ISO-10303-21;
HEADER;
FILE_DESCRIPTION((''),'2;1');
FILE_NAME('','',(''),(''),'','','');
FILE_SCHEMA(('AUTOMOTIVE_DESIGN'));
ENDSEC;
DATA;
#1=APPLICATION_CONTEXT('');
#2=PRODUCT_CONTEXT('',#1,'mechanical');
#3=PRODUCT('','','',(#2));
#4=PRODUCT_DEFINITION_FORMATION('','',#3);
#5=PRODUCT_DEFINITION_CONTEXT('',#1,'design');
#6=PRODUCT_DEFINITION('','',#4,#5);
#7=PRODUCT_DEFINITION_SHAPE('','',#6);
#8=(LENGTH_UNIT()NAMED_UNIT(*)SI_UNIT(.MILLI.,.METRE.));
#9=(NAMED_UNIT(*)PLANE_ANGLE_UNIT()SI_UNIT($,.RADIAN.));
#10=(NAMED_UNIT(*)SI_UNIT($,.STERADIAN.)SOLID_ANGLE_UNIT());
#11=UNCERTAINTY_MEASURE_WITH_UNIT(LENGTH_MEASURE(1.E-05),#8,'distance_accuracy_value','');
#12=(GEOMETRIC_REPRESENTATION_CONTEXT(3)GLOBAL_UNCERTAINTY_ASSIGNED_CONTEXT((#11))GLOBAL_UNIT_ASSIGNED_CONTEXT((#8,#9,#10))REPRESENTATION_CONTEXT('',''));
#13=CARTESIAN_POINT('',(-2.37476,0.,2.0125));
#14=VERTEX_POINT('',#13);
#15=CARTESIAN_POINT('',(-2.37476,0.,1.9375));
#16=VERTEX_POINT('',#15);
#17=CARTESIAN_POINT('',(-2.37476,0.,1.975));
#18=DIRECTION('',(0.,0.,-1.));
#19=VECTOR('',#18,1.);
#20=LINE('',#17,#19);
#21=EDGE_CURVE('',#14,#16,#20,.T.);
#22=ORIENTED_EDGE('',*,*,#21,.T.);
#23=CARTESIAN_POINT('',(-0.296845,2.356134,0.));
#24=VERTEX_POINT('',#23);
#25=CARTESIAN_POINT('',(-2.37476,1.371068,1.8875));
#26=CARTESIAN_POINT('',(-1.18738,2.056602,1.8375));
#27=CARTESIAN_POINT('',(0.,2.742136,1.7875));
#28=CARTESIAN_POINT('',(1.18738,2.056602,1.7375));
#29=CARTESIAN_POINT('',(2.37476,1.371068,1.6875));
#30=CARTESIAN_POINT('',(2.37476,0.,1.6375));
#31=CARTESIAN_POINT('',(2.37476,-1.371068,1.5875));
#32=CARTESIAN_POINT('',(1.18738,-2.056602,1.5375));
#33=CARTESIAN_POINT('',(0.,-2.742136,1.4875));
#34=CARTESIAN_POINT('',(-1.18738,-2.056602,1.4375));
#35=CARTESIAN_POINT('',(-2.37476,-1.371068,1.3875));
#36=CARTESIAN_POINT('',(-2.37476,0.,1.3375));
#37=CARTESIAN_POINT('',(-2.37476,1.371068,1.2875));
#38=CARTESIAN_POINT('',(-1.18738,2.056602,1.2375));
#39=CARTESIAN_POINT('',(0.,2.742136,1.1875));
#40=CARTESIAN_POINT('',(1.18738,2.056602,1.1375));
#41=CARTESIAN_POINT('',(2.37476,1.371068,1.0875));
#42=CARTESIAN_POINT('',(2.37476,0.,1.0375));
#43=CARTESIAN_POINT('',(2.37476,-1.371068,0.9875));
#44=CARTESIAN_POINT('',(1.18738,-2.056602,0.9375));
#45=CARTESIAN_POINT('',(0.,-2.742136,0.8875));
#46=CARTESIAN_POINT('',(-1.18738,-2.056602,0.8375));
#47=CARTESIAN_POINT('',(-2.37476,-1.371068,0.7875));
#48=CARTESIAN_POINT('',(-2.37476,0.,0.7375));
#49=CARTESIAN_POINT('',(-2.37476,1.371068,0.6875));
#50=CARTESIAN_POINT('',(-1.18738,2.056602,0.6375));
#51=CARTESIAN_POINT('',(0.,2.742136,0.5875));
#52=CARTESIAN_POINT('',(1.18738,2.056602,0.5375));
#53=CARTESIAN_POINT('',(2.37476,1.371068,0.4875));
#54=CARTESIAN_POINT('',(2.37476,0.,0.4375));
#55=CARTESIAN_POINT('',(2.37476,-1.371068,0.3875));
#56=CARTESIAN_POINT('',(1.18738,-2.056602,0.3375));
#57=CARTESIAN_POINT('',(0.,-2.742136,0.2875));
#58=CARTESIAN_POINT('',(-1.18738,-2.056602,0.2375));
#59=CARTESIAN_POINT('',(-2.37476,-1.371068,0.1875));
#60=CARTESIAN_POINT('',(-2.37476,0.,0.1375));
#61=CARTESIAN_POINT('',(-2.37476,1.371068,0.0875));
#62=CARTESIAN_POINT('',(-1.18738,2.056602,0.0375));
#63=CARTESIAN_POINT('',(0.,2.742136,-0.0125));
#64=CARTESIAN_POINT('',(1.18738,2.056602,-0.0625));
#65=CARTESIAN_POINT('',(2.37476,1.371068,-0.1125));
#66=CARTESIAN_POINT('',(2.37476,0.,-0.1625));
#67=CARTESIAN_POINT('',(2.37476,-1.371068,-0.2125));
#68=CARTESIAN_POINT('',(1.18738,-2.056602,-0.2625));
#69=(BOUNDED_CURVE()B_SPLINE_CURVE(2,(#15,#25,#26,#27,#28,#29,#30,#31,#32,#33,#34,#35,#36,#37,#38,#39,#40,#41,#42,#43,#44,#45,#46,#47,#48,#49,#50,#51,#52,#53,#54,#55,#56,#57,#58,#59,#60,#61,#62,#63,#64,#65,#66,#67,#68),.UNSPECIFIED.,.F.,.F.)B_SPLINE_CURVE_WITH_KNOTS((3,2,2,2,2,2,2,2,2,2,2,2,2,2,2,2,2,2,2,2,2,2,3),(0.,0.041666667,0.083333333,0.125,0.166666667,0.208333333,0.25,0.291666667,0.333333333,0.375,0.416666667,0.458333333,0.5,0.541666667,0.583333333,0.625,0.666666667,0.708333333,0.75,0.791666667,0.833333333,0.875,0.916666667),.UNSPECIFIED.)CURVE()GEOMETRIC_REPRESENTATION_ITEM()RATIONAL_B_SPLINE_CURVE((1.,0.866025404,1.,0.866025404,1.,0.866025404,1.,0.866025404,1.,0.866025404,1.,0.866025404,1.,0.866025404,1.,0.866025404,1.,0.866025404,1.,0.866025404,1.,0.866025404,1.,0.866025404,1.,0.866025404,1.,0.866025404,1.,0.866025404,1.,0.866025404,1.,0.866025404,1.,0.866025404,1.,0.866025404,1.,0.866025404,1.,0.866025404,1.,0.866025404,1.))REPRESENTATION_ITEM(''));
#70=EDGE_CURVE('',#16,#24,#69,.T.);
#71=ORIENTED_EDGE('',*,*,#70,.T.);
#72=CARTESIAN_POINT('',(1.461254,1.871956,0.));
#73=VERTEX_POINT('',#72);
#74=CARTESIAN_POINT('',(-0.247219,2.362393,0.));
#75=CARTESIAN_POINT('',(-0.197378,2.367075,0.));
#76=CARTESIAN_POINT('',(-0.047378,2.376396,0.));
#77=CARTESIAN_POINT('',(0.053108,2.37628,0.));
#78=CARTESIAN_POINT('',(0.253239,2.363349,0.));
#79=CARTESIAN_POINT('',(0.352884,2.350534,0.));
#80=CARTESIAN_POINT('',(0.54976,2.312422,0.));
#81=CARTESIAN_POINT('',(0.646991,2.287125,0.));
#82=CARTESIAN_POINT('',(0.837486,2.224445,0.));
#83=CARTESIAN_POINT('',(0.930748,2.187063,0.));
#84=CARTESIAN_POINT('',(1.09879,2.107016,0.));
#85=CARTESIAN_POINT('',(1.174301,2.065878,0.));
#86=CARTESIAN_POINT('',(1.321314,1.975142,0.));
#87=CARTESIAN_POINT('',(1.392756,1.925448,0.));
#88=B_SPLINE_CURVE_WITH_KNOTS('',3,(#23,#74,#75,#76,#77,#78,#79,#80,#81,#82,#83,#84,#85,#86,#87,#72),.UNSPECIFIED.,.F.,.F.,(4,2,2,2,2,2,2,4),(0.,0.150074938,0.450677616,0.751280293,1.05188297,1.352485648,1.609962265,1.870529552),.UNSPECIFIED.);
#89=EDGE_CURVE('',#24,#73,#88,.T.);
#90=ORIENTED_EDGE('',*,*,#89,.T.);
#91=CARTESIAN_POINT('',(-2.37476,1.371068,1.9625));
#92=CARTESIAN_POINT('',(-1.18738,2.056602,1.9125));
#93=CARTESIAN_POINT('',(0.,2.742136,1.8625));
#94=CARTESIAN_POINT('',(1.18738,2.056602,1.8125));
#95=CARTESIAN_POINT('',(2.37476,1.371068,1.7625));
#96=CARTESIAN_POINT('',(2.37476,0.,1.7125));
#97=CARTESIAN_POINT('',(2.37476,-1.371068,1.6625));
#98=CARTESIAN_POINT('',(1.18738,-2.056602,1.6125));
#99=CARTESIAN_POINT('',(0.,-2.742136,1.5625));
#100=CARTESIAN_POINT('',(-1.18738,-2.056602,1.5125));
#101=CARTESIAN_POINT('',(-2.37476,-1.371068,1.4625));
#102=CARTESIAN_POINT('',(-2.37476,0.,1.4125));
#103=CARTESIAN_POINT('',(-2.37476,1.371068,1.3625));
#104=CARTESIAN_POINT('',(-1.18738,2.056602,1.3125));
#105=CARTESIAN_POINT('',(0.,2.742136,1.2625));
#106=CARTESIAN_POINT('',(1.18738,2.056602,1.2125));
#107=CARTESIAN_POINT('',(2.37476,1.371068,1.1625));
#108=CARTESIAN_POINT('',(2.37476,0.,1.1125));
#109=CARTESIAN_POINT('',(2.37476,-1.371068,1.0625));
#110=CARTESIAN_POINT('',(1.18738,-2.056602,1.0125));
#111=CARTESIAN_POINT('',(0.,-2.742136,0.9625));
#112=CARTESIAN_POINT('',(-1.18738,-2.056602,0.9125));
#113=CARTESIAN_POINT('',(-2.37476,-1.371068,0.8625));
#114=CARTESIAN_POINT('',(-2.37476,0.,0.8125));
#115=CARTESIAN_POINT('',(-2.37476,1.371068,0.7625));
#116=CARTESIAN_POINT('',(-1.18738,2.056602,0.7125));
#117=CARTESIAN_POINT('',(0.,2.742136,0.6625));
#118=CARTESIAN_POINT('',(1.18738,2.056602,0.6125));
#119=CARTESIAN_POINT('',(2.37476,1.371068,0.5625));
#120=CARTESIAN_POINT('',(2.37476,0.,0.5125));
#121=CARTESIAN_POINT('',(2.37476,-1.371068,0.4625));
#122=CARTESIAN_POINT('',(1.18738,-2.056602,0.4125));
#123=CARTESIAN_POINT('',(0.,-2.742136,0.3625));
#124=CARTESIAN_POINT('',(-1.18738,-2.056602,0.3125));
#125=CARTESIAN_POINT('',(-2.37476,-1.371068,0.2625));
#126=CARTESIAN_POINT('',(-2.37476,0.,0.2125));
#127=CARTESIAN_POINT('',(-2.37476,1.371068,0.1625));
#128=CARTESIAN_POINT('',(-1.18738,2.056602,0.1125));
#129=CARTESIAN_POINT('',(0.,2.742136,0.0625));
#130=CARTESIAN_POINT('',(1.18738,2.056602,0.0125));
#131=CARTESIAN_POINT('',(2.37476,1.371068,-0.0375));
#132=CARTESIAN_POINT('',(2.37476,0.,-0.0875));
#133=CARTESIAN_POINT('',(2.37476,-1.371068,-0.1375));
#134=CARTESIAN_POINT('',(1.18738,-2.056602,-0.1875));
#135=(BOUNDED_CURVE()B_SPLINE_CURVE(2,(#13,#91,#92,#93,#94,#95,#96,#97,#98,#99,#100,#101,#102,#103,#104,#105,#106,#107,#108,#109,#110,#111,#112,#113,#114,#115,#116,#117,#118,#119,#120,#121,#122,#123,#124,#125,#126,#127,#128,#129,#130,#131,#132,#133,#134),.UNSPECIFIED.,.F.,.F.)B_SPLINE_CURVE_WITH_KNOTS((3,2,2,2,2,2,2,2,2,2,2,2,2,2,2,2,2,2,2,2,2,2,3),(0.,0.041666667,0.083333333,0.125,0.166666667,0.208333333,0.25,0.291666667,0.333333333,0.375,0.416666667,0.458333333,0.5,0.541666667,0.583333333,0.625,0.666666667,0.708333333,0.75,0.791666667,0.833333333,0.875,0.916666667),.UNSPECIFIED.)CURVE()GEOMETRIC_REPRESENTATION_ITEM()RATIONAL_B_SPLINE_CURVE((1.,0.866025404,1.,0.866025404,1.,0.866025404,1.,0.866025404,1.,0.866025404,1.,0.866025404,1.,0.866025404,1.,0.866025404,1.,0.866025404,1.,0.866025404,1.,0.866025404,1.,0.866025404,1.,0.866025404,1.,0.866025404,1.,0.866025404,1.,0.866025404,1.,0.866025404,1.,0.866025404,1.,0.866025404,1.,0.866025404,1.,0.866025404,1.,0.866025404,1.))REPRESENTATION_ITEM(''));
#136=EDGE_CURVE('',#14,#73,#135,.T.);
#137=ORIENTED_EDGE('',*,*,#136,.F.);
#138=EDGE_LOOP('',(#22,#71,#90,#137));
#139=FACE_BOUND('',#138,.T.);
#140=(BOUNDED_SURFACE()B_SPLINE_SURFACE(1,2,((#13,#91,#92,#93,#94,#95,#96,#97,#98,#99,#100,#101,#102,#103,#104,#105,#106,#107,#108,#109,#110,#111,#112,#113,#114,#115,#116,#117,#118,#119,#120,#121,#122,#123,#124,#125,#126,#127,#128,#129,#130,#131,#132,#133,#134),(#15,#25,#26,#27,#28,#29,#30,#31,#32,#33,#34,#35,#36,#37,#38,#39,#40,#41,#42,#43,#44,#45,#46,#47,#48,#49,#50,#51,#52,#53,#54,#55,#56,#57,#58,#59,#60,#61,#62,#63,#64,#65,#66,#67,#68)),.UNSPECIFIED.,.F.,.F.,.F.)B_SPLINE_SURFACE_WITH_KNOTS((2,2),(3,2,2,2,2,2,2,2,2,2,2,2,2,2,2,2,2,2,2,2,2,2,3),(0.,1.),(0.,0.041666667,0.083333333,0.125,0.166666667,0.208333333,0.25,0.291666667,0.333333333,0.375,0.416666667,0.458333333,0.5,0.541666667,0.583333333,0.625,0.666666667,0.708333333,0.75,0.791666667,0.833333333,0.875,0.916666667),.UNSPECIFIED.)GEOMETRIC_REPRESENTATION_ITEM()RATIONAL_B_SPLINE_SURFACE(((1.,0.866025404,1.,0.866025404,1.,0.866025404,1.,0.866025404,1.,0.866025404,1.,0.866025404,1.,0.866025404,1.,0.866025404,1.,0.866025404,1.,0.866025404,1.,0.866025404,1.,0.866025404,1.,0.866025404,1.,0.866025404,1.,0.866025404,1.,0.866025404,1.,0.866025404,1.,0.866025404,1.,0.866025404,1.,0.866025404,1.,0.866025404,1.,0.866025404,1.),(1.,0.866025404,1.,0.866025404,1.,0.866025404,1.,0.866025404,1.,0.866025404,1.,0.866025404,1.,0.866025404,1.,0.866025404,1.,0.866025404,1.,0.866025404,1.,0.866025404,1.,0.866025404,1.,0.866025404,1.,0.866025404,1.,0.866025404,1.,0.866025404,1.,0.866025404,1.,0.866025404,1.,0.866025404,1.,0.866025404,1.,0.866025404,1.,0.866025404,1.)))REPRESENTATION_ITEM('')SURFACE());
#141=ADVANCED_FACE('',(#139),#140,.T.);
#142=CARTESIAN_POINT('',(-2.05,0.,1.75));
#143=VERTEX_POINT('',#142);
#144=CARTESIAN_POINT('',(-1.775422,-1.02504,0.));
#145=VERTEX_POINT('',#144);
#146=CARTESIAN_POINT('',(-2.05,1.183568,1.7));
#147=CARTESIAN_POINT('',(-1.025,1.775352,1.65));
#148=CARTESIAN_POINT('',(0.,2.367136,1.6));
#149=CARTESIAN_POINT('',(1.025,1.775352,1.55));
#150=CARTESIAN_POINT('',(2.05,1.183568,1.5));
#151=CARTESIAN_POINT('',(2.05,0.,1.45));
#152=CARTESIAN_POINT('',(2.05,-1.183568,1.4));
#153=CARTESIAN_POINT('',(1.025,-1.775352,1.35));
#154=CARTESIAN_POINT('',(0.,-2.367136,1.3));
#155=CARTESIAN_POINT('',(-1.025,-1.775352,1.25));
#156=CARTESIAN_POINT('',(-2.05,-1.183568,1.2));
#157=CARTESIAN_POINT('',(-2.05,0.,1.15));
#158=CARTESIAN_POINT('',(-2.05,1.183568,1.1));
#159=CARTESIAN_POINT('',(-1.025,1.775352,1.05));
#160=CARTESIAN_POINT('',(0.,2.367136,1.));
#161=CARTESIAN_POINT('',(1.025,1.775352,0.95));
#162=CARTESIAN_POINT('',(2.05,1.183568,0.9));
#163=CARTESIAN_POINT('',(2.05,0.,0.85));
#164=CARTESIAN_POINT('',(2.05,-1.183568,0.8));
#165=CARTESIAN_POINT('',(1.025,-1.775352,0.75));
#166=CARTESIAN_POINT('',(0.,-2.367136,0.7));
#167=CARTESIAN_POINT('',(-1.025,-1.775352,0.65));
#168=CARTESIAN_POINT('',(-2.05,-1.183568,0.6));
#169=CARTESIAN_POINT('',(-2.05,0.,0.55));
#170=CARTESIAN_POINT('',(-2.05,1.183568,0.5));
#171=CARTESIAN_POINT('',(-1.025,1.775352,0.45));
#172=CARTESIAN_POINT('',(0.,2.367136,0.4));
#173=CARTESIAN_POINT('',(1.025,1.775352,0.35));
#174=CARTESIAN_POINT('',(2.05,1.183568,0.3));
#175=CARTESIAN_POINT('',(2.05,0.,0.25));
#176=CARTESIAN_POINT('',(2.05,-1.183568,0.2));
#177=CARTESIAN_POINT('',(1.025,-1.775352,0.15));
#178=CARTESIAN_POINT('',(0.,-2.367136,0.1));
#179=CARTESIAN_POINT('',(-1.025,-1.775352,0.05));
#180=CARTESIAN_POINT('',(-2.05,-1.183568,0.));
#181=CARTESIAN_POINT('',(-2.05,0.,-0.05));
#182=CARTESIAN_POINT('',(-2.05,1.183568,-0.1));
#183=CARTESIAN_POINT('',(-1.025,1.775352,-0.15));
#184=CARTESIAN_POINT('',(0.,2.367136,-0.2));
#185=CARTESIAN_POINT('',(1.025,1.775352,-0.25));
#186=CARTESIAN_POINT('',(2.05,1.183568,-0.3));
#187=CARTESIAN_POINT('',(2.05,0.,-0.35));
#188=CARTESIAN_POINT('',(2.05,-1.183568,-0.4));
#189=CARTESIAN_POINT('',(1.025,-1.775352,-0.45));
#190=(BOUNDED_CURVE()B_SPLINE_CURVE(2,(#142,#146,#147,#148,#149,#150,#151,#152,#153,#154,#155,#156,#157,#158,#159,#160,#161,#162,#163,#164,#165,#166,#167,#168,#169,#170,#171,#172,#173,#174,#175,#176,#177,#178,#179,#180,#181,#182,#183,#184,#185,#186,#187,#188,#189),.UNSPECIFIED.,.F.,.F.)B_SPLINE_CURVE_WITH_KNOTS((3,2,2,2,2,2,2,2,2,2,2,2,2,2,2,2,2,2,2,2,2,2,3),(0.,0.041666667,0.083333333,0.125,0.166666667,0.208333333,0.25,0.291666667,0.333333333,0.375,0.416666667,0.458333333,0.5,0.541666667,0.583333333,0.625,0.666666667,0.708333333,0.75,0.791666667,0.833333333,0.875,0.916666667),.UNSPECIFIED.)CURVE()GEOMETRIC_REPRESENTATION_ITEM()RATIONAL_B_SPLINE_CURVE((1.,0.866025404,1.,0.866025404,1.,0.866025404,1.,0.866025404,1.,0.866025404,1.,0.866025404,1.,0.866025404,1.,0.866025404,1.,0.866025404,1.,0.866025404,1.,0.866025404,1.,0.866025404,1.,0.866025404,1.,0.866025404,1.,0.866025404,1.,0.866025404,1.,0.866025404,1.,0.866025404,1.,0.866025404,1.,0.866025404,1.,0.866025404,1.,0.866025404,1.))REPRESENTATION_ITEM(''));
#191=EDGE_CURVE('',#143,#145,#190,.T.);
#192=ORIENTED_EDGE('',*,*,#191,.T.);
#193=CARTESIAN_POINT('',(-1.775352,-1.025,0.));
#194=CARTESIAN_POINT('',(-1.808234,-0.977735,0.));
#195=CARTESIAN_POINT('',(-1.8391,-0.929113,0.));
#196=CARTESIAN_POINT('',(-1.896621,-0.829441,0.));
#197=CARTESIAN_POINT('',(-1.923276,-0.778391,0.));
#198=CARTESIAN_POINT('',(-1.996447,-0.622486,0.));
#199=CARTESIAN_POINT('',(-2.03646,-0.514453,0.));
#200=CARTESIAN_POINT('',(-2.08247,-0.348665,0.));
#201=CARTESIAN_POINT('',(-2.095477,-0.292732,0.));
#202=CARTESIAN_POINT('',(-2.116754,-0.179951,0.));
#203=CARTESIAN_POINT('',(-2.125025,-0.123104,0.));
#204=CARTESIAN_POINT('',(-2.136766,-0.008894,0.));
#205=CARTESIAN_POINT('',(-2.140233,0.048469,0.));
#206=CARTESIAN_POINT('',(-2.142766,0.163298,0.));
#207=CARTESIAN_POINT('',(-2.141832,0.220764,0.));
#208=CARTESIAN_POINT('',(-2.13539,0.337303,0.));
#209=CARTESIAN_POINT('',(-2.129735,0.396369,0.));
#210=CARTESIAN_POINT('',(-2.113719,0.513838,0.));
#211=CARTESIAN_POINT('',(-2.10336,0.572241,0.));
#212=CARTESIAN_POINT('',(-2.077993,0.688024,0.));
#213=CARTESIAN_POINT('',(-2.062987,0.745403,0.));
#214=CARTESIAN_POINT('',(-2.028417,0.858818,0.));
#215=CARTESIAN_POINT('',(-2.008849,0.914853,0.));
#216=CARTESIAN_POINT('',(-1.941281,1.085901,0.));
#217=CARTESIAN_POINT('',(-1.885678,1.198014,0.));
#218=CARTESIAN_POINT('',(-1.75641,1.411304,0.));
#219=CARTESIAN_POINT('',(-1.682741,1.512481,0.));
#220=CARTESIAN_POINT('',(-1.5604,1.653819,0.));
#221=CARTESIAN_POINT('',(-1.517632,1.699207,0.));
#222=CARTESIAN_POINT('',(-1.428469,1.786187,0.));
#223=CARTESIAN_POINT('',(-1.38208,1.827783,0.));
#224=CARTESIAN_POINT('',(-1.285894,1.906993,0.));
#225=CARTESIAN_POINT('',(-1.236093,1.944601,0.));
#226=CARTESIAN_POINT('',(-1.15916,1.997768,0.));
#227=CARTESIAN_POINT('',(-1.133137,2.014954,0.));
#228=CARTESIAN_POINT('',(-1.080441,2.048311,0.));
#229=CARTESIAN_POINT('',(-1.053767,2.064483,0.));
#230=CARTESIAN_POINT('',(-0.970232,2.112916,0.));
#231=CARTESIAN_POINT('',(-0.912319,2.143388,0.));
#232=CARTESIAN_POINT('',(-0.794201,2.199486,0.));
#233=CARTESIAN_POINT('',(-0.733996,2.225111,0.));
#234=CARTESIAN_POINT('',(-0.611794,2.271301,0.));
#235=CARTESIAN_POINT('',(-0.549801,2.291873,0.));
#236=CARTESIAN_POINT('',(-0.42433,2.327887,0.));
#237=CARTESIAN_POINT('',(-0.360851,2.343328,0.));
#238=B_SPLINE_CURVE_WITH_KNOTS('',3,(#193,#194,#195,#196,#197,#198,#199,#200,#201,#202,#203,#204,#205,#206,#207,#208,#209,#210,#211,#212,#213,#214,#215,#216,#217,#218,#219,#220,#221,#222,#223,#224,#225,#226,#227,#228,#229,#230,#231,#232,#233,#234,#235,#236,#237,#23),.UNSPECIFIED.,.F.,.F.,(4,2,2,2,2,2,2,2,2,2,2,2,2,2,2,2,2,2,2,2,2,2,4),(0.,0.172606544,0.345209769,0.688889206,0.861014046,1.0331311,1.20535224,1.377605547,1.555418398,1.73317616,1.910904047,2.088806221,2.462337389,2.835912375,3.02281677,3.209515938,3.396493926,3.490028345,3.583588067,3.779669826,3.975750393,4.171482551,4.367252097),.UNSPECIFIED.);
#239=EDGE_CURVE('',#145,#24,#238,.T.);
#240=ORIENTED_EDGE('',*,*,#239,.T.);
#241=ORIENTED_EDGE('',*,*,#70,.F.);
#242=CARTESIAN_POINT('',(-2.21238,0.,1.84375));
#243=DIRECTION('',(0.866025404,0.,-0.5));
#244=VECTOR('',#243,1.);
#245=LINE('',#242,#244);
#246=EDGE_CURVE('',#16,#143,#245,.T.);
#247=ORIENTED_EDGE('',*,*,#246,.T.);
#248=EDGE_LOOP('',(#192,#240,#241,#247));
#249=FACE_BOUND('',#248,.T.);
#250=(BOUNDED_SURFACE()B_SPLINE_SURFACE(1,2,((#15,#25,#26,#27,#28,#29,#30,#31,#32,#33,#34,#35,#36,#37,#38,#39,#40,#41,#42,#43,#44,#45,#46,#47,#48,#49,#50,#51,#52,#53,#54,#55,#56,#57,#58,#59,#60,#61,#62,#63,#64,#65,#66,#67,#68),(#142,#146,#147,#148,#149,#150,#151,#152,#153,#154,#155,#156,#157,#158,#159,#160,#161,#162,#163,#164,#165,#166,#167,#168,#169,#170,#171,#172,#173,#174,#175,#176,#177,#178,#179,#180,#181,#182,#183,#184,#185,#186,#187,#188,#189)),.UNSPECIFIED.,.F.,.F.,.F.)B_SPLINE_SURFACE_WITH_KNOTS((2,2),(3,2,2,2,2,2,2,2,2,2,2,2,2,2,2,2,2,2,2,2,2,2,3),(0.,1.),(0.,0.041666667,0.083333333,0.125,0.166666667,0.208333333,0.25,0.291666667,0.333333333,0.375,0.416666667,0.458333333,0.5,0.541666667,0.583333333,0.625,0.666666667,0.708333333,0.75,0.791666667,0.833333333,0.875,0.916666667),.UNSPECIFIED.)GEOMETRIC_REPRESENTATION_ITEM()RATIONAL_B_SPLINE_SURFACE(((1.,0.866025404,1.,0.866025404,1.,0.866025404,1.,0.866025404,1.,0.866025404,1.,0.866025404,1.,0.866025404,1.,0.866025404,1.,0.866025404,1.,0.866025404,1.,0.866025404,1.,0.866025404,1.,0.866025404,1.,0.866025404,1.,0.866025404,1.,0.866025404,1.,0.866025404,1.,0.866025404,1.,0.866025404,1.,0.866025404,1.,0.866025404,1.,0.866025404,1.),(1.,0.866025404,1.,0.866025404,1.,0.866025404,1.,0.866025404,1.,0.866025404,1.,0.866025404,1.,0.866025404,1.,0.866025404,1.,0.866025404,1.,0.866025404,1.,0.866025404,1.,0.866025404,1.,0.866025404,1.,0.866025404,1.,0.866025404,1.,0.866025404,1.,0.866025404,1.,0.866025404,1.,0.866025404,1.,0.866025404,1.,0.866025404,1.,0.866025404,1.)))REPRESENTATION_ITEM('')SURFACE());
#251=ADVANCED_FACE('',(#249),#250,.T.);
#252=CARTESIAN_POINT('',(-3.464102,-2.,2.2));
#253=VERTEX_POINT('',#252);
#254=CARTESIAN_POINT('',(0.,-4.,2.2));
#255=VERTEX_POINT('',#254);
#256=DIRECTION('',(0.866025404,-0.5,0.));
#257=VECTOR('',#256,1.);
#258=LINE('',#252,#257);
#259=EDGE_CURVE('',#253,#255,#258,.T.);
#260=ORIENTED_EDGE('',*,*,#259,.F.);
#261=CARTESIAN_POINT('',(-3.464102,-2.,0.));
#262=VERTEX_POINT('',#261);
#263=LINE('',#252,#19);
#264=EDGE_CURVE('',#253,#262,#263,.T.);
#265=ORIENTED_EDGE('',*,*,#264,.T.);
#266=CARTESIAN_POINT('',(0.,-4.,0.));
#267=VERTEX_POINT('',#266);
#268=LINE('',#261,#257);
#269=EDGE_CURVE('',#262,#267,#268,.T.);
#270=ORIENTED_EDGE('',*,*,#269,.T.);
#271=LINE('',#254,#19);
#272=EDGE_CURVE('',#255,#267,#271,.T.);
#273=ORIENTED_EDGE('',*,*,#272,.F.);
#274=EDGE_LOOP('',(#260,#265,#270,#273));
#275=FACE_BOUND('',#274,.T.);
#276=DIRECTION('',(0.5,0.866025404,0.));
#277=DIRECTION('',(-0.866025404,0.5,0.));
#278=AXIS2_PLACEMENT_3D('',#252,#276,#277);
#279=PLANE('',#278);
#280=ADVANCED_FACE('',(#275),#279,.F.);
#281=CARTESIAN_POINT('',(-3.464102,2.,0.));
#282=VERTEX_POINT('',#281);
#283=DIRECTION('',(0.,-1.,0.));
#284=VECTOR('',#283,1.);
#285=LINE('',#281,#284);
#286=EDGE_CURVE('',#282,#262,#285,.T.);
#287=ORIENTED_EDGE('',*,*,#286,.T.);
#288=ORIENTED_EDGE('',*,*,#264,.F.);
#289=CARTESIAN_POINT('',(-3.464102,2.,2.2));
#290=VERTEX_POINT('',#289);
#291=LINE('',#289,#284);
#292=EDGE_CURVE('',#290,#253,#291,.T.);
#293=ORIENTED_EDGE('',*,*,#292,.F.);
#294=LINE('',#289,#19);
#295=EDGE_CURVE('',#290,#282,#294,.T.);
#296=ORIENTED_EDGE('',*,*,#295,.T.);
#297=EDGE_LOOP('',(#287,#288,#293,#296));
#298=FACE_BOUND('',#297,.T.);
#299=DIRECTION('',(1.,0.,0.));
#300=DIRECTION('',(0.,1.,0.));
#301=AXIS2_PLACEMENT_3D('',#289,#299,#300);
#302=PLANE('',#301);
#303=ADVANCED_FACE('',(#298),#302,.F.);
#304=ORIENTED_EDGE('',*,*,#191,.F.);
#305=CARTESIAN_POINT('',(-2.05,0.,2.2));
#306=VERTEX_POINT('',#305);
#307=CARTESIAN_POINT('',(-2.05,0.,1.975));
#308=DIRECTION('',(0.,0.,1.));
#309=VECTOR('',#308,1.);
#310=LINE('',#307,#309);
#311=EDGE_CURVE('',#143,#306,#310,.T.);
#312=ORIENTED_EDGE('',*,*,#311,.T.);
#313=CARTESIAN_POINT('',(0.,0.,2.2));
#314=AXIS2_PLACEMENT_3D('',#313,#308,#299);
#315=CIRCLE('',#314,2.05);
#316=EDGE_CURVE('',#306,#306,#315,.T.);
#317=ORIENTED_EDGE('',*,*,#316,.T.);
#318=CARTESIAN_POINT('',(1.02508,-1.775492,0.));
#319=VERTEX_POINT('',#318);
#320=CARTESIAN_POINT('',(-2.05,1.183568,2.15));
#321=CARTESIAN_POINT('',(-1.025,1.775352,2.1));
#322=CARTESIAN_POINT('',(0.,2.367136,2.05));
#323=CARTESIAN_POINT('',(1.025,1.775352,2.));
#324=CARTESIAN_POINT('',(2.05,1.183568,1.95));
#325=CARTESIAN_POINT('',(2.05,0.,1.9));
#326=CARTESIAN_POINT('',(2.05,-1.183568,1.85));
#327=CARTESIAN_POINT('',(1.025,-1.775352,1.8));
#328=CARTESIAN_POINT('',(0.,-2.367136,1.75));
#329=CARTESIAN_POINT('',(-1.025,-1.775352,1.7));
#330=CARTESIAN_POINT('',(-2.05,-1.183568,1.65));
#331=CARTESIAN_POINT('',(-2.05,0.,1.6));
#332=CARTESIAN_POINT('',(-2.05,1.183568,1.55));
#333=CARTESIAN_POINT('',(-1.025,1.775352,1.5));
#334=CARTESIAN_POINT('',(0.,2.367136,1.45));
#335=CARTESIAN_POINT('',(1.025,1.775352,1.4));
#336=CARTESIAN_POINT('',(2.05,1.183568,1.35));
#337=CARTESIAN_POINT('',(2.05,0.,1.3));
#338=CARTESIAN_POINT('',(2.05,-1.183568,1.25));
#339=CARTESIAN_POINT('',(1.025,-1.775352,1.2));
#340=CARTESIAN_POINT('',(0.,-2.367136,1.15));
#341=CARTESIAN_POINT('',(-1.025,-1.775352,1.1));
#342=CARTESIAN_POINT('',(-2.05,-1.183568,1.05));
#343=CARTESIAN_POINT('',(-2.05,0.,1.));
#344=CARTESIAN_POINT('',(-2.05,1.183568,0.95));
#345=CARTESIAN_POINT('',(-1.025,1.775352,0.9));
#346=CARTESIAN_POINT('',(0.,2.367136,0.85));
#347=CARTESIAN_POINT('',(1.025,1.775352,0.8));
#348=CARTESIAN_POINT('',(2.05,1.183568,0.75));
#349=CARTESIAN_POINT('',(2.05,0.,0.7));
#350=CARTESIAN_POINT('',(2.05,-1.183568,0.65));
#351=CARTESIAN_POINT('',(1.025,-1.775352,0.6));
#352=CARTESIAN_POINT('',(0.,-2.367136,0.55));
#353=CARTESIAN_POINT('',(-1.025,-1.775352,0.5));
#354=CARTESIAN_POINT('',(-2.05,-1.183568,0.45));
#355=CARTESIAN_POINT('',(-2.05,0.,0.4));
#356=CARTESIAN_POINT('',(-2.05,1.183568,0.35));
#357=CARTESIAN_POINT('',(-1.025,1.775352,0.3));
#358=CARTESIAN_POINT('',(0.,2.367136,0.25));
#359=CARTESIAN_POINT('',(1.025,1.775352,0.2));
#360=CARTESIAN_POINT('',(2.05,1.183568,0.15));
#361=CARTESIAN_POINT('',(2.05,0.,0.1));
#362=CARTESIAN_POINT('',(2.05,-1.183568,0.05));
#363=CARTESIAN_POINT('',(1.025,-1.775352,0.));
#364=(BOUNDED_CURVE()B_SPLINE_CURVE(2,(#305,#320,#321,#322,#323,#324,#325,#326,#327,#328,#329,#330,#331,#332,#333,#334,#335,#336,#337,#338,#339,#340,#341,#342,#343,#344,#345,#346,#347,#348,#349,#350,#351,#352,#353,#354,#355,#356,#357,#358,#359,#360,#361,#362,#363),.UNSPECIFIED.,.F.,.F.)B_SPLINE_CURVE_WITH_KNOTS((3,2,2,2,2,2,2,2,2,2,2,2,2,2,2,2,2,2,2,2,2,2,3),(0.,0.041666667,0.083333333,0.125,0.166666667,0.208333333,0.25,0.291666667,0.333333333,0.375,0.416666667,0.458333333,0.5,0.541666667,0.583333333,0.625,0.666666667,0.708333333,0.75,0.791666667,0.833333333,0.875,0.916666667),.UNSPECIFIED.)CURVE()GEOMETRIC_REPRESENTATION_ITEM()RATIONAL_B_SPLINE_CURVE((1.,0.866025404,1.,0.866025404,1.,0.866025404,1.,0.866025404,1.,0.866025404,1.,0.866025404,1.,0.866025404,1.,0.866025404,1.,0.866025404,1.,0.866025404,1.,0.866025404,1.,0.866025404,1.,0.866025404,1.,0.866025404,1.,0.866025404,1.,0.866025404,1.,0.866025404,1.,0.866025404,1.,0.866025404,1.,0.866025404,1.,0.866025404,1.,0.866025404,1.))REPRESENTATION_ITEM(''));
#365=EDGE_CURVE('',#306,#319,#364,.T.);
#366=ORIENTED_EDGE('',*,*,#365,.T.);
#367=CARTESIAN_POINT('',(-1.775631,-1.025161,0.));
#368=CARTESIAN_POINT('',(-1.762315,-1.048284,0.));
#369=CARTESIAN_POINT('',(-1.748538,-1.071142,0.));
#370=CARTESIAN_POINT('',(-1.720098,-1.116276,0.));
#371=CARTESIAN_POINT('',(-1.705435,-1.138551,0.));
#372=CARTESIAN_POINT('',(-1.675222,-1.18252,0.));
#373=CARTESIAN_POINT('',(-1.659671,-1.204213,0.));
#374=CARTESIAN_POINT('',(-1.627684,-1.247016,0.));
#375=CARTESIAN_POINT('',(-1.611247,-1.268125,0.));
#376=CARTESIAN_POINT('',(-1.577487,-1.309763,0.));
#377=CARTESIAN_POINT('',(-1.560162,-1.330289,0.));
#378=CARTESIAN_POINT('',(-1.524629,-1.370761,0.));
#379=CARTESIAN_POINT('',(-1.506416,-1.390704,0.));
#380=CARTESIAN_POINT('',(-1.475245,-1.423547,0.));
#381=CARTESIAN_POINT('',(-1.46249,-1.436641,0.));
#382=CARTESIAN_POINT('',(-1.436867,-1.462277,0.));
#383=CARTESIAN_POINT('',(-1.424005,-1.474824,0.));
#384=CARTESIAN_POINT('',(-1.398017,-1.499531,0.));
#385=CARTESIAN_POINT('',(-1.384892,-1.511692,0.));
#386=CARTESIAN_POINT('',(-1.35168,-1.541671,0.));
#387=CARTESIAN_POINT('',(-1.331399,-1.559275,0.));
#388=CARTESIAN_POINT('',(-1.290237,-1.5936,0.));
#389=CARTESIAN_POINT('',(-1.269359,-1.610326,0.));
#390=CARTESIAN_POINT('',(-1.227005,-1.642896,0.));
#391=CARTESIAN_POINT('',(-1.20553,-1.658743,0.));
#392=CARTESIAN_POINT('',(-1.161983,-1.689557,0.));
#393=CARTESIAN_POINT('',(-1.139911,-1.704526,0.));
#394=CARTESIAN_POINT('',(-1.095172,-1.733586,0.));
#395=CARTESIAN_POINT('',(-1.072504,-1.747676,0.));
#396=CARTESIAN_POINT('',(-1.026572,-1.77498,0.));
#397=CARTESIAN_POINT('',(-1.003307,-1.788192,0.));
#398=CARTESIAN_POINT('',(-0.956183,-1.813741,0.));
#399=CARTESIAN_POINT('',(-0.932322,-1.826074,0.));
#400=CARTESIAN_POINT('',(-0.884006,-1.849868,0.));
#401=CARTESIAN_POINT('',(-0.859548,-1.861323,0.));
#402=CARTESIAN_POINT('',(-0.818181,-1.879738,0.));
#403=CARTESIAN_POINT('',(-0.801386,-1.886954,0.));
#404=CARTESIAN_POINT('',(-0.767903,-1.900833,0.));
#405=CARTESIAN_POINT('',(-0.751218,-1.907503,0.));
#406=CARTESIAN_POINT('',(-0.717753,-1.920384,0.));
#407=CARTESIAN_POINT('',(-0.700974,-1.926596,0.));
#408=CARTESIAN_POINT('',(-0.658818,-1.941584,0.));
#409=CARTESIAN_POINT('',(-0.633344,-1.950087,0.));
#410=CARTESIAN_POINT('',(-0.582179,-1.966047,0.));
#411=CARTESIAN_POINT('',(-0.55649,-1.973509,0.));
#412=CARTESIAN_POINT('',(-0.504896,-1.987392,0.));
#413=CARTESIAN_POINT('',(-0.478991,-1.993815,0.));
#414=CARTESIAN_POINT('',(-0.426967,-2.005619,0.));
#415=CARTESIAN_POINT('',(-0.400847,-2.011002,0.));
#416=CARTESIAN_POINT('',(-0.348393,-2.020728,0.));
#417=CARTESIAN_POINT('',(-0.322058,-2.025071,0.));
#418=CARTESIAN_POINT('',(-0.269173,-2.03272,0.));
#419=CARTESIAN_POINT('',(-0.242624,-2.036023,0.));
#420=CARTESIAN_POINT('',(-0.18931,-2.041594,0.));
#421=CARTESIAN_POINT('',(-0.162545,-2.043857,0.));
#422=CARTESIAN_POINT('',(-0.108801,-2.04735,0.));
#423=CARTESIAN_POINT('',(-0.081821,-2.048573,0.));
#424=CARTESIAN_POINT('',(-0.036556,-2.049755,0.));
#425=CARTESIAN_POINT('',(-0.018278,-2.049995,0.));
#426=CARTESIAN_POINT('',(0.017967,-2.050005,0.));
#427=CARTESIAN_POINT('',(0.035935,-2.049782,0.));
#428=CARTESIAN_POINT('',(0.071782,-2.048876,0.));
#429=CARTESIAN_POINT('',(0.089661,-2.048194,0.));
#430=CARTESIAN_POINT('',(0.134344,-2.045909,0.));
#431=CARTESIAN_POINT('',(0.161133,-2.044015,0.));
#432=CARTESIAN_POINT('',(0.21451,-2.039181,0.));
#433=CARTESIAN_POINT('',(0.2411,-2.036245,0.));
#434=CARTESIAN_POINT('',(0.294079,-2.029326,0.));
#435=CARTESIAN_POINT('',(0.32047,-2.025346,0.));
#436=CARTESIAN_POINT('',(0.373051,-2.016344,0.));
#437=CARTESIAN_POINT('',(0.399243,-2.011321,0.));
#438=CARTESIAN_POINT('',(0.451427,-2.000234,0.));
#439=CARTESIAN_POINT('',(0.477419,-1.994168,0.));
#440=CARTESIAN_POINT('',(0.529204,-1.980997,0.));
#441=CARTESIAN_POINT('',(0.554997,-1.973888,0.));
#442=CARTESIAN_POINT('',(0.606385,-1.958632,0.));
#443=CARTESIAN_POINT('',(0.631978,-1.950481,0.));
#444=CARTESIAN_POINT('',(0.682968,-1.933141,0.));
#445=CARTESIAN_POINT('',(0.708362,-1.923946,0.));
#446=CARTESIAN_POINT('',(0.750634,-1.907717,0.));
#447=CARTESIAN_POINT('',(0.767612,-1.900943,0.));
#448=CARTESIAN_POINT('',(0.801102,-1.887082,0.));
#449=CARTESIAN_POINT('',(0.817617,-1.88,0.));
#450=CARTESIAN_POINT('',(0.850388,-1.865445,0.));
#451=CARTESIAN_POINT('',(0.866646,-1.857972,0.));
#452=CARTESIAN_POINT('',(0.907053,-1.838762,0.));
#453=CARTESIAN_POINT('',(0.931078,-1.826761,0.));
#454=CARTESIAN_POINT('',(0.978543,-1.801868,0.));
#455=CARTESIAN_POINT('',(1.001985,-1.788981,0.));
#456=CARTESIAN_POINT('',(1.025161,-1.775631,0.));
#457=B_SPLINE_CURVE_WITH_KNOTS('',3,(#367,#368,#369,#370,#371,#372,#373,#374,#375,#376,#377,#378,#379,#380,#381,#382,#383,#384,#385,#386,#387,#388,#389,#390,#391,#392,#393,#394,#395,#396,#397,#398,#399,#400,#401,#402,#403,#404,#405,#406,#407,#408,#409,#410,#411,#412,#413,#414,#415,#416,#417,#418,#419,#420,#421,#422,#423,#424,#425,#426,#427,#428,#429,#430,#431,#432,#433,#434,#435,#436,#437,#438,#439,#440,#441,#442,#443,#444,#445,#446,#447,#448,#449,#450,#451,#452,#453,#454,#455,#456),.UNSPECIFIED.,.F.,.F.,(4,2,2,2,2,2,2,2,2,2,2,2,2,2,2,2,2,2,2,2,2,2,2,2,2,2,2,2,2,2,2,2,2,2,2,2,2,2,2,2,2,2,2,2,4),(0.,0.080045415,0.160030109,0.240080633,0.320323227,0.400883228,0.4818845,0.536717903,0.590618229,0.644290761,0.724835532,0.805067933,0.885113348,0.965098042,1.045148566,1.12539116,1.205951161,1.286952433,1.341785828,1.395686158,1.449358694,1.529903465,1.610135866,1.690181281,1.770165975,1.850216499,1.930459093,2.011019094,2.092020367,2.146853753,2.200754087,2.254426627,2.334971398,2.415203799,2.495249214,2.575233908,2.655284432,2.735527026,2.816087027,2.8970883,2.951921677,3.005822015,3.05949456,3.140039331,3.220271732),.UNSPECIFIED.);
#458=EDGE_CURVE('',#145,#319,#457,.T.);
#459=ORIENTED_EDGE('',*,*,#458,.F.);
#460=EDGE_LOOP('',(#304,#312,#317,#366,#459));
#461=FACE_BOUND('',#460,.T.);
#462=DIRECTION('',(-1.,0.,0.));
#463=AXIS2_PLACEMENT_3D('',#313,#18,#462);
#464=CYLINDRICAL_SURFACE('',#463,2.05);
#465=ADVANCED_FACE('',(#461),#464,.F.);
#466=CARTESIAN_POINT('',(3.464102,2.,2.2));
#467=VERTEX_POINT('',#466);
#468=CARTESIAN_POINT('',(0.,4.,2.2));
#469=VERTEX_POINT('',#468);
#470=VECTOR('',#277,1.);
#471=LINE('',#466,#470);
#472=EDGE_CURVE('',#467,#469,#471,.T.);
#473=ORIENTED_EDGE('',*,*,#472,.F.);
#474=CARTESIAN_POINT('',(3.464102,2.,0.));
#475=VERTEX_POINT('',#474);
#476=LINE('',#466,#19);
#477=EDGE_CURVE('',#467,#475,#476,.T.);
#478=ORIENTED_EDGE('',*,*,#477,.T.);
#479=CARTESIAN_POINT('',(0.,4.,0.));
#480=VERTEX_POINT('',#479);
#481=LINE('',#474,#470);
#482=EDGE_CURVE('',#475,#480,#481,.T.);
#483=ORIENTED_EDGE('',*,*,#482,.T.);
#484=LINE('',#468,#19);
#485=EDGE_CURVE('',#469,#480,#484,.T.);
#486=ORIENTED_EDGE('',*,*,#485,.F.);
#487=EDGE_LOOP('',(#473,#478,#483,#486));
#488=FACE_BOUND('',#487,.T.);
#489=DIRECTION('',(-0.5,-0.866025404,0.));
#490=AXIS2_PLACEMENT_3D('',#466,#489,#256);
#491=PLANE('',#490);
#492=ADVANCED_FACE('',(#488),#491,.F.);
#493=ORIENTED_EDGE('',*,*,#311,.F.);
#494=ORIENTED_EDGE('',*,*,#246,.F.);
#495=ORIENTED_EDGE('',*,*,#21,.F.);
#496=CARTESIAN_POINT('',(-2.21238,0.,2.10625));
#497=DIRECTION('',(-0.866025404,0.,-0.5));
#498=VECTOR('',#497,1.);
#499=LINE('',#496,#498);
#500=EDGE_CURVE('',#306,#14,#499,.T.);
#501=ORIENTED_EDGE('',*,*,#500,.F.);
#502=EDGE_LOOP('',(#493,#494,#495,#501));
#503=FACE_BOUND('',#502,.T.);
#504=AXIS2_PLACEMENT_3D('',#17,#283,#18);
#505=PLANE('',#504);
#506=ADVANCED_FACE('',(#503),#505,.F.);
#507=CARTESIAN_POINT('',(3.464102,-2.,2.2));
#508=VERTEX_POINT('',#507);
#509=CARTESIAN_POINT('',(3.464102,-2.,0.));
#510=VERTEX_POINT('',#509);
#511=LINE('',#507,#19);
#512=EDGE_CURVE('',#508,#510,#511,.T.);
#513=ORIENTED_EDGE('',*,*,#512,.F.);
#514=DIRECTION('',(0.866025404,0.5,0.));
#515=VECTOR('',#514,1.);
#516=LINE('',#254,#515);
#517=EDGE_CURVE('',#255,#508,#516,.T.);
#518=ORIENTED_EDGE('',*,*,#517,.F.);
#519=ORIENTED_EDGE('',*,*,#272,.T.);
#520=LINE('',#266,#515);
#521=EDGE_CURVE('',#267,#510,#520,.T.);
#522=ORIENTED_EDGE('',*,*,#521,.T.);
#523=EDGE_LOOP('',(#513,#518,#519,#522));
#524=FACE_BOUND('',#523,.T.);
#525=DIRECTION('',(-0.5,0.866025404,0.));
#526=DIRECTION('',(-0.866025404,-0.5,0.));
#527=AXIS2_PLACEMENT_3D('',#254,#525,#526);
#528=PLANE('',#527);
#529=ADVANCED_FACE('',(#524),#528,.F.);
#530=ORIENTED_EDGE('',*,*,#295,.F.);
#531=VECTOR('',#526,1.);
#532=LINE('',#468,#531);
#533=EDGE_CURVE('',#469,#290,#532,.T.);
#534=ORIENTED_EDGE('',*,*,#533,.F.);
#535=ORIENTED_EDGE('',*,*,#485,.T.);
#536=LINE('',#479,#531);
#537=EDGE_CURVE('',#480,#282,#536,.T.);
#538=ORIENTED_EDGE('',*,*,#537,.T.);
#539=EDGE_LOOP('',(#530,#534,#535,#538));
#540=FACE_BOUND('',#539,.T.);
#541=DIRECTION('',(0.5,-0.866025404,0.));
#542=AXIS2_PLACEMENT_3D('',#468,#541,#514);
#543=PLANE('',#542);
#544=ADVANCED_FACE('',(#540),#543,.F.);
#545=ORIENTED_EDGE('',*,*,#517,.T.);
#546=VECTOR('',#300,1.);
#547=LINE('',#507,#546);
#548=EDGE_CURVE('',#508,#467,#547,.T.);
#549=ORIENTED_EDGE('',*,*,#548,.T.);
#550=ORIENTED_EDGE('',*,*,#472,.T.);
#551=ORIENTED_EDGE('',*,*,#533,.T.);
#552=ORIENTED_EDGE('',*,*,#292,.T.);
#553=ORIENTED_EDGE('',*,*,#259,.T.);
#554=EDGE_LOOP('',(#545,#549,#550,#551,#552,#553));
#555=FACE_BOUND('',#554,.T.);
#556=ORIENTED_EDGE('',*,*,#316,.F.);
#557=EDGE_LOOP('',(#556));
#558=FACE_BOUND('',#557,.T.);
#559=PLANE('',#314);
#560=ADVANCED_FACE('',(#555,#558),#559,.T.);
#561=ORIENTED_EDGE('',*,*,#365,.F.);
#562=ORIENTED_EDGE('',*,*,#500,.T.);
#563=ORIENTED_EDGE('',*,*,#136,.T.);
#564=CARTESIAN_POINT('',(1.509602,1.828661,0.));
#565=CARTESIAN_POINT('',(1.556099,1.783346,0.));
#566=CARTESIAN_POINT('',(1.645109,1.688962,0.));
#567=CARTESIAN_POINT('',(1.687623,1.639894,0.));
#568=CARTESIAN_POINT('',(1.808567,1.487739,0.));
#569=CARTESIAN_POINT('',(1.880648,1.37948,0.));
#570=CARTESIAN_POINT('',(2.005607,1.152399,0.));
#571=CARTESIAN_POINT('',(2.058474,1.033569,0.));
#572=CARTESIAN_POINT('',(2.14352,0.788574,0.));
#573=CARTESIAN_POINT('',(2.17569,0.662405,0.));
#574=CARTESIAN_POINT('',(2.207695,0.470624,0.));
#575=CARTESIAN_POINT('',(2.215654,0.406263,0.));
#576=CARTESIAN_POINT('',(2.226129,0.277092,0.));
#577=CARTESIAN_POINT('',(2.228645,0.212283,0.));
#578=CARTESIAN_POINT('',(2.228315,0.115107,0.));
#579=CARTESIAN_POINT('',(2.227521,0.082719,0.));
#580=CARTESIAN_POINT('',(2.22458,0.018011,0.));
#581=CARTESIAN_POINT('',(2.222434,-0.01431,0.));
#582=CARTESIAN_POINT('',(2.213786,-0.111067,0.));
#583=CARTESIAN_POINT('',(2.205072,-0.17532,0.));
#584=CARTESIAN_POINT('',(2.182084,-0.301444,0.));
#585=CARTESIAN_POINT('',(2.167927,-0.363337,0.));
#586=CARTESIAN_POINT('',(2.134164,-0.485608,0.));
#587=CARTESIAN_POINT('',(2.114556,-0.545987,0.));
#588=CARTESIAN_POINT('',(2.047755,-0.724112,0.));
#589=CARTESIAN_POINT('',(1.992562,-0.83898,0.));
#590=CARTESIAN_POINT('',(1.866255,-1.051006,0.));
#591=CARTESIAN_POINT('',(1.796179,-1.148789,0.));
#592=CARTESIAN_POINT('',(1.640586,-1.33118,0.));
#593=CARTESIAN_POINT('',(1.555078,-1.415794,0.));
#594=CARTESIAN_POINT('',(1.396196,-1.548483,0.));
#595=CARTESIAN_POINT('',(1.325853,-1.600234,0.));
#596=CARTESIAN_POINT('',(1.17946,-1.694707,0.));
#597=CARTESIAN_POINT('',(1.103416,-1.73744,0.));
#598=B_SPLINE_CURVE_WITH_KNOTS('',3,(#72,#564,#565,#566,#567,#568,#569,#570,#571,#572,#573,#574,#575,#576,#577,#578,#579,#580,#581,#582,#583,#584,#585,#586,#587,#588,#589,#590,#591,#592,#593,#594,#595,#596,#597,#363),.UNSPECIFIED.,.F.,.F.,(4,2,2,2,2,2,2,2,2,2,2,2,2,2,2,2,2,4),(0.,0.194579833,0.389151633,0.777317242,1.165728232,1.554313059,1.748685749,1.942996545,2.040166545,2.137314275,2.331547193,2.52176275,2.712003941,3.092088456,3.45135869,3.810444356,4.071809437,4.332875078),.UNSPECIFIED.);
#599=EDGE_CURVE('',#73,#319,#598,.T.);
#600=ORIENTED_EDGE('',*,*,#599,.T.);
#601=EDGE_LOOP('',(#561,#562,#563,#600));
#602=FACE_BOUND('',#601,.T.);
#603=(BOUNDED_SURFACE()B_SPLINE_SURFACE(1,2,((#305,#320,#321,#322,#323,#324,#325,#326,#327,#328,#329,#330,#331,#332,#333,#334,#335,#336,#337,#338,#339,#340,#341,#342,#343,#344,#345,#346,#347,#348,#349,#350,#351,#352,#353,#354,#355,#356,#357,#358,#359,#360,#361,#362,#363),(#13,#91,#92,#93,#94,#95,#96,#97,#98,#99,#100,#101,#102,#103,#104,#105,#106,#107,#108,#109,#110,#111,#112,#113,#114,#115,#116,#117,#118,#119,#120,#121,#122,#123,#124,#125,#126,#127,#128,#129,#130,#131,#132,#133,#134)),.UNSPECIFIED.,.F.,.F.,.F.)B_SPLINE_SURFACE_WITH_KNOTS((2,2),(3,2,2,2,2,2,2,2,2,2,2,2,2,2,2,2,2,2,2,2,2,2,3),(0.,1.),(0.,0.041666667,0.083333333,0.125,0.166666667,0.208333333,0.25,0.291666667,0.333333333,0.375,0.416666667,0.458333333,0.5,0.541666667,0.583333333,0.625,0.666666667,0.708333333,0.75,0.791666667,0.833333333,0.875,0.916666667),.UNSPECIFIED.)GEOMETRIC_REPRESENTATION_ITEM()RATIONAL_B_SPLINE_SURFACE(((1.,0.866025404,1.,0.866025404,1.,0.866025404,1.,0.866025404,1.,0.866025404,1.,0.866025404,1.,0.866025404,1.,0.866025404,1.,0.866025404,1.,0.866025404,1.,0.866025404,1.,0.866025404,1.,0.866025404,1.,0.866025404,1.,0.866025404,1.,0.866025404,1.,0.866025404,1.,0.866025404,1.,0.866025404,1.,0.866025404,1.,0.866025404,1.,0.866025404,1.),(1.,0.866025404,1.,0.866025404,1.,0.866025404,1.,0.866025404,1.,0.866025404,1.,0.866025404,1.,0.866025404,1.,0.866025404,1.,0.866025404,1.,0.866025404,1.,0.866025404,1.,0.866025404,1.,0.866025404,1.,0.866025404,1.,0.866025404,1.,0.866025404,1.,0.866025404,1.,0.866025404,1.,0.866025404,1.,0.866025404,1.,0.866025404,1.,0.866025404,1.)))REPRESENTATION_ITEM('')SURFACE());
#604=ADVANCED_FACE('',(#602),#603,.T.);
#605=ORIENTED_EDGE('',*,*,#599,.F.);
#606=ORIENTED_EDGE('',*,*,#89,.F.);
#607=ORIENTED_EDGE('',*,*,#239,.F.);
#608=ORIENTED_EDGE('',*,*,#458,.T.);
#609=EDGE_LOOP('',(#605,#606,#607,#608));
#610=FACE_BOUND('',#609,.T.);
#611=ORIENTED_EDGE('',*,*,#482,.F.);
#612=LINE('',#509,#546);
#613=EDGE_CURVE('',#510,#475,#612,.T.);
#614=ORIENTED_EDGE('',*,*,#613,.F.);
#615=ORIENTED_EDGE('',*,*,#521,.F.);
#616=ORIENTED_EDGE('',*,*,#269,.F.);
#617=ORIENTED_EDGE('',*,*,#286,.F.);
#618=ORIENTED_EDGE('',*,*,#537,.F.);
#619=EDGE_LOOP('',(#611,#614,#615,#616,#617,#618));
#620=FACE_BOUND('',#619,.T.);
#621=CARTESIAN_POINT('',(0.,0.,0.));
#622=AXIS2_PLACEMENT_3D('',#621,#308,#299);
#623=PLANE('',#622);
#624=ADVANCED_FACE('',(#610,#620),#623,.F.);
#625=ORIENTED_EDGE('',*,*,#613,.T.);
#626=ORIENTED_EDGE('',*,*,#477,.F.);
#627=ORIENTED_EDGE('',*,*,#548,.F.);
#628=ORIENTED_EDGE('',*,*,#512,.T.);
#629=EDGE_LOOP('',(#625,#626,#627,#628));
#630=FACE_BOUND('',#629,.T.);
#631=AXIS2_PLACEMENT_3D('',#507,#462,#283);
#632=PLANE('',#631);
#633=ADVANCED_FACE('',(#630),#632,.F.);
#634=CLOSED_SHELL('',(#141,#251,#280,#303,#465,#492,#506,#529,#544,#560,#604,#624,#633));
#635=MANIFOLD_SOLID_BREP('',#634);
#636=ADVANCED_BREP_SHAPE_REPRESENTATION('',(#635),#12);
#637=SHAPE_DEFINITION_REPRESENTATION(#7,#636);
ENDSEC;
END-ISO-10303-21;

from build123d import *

# Parameters (mm, degrees)
SKETCH1_R           = 2.05
BOSS_EXTRUDE1_DEPTH = 2.2
THREAD1_PITCH       = 0.6


with BuildPart() as part:
    # Sketch1 → Boss-Extrude1 (new body)
    with BuildSketch(Plane.XY):
        Polygon((-3.464101615, -2), (0, -4), (3.464101615, -2), (3.464101615, 2), (0, 4), (-3.464101615, 2), align=None)
        Circle(SKETCH1_R, mode=Mode.SUBTRACT)
    extrude(amount=BOSS_EXTRUDE1_DEPTH)

    # Thread1: the profile of Thread Profile1 profile screwed along a right-hand helix of 3.666667 turns, 6 arcs to a turn; built about Z, then put on its axis
    thread1_z = Axis((0, 0, 0), (0, 0, 1))
    thread1_corners = [(2.0497, 0, -0.000173205), (2.374759525, 0, 0.187499999), (2.374759525, 0, 0.262499999), (2.0497, 0, 0.450173203)]
    with BuildLine(mode=Mode.PRIVATE) as thread1_profile:
        Line(thread1_corners[0], thread1_corners[1])
        Line(thread1_corners[1], thread1_corners[2])
        Line(thread1_corners[2], thread1_corners[3])
        Line(thread1_corners[3], thread1_corners[0])
    thread1_cap = Face(thread1_profile.wire())
    thread1_turn_angles = [0, 30, 60, 90, 120, 150, 180, 210, 240, 270, 300, 330, 360]
    thread1_turn_weights = [1, 0.8660254037844387, 1, 0.8660254037844387, 1, 0.8660254037844387, 1, 0.8660254037844387, 1, 0.8660254037844387, 1, 0.8660254037844387, 1]
    thread1_turn_rails = [Edge.make_bspline([Vector(p[0], p[1], 0).rotate(thread1_z, thread1_turn_angles[k]) / thread1_turn_weights[k] + Vector(0, 0, p[2] + THREAD1_PITCH * thread1_turn_angles[k] / 360) for k in range(13)], [0, 0, 0, 1, 1, 2, 2, 3, 3, 4, 4, 5, 5, 6, 6, 6], 2, thread1_turn_weights) for p in thread1_corners]
    thread1_turn_sides = [Face.make_surface_from_curves(thread1_turn_rails[p[0]], thread1_turn_rails[p[1]]) for p in [(0, 1), (1, 2), (2, 3), (3, 0)]]
    thread1_last_angles = [1080, 1110, 1140, 1170, 1200, 1230, 1260, 1290, 1320]
    thread1_last_weights = [1, 0.8660254037844387, 1, 0.8660254037844387, 1, 0.8660254037844387, 1, 0.8660254037844377, 1]
    thread1_last_rails = [Edge.make_bspline([Vector(p[0], p[1], 0).rotate(thread1_z, thread1_last_angles[k]) / thread1_last_weights[k] + Vector(0, 0, p[2] + THREAD1_PITCH * thread1_last_angles[k] / 360) for k in range(9)], [0, 0, 0, 1, 1, 2, 2, 3, 3, 4, 4, 4], 2, thread1_last_weights) for p in thread1_corners]
    thread1_last_sides = [Face.make_surface_from_curves(thread1_last_rails[p[0]], thread1_last_rails[p[1]]) for p in [(0, 1), (1, 2), (2, 3), (3, 0)]]
    thread1 = Plane(origin=(0, 0, 2.2), x_dir=(-1, 0, 0), z_dir=(0, 0, -1)) * Solid(Shell([*[p.moved(Location((0, 0, THREAD1_PITCH * i))) for i in range(3) for p in thread1_turn_sides], *thread1_last_sides, thread1_cap, thread1_cap.rotate(thread1_z, 1320).moved(Location((0, 0, THREAD1_PITCH * 1320 / 360)))]))
    add(thread1, mode=Mode.SUBTRACT)


solid = part.part
